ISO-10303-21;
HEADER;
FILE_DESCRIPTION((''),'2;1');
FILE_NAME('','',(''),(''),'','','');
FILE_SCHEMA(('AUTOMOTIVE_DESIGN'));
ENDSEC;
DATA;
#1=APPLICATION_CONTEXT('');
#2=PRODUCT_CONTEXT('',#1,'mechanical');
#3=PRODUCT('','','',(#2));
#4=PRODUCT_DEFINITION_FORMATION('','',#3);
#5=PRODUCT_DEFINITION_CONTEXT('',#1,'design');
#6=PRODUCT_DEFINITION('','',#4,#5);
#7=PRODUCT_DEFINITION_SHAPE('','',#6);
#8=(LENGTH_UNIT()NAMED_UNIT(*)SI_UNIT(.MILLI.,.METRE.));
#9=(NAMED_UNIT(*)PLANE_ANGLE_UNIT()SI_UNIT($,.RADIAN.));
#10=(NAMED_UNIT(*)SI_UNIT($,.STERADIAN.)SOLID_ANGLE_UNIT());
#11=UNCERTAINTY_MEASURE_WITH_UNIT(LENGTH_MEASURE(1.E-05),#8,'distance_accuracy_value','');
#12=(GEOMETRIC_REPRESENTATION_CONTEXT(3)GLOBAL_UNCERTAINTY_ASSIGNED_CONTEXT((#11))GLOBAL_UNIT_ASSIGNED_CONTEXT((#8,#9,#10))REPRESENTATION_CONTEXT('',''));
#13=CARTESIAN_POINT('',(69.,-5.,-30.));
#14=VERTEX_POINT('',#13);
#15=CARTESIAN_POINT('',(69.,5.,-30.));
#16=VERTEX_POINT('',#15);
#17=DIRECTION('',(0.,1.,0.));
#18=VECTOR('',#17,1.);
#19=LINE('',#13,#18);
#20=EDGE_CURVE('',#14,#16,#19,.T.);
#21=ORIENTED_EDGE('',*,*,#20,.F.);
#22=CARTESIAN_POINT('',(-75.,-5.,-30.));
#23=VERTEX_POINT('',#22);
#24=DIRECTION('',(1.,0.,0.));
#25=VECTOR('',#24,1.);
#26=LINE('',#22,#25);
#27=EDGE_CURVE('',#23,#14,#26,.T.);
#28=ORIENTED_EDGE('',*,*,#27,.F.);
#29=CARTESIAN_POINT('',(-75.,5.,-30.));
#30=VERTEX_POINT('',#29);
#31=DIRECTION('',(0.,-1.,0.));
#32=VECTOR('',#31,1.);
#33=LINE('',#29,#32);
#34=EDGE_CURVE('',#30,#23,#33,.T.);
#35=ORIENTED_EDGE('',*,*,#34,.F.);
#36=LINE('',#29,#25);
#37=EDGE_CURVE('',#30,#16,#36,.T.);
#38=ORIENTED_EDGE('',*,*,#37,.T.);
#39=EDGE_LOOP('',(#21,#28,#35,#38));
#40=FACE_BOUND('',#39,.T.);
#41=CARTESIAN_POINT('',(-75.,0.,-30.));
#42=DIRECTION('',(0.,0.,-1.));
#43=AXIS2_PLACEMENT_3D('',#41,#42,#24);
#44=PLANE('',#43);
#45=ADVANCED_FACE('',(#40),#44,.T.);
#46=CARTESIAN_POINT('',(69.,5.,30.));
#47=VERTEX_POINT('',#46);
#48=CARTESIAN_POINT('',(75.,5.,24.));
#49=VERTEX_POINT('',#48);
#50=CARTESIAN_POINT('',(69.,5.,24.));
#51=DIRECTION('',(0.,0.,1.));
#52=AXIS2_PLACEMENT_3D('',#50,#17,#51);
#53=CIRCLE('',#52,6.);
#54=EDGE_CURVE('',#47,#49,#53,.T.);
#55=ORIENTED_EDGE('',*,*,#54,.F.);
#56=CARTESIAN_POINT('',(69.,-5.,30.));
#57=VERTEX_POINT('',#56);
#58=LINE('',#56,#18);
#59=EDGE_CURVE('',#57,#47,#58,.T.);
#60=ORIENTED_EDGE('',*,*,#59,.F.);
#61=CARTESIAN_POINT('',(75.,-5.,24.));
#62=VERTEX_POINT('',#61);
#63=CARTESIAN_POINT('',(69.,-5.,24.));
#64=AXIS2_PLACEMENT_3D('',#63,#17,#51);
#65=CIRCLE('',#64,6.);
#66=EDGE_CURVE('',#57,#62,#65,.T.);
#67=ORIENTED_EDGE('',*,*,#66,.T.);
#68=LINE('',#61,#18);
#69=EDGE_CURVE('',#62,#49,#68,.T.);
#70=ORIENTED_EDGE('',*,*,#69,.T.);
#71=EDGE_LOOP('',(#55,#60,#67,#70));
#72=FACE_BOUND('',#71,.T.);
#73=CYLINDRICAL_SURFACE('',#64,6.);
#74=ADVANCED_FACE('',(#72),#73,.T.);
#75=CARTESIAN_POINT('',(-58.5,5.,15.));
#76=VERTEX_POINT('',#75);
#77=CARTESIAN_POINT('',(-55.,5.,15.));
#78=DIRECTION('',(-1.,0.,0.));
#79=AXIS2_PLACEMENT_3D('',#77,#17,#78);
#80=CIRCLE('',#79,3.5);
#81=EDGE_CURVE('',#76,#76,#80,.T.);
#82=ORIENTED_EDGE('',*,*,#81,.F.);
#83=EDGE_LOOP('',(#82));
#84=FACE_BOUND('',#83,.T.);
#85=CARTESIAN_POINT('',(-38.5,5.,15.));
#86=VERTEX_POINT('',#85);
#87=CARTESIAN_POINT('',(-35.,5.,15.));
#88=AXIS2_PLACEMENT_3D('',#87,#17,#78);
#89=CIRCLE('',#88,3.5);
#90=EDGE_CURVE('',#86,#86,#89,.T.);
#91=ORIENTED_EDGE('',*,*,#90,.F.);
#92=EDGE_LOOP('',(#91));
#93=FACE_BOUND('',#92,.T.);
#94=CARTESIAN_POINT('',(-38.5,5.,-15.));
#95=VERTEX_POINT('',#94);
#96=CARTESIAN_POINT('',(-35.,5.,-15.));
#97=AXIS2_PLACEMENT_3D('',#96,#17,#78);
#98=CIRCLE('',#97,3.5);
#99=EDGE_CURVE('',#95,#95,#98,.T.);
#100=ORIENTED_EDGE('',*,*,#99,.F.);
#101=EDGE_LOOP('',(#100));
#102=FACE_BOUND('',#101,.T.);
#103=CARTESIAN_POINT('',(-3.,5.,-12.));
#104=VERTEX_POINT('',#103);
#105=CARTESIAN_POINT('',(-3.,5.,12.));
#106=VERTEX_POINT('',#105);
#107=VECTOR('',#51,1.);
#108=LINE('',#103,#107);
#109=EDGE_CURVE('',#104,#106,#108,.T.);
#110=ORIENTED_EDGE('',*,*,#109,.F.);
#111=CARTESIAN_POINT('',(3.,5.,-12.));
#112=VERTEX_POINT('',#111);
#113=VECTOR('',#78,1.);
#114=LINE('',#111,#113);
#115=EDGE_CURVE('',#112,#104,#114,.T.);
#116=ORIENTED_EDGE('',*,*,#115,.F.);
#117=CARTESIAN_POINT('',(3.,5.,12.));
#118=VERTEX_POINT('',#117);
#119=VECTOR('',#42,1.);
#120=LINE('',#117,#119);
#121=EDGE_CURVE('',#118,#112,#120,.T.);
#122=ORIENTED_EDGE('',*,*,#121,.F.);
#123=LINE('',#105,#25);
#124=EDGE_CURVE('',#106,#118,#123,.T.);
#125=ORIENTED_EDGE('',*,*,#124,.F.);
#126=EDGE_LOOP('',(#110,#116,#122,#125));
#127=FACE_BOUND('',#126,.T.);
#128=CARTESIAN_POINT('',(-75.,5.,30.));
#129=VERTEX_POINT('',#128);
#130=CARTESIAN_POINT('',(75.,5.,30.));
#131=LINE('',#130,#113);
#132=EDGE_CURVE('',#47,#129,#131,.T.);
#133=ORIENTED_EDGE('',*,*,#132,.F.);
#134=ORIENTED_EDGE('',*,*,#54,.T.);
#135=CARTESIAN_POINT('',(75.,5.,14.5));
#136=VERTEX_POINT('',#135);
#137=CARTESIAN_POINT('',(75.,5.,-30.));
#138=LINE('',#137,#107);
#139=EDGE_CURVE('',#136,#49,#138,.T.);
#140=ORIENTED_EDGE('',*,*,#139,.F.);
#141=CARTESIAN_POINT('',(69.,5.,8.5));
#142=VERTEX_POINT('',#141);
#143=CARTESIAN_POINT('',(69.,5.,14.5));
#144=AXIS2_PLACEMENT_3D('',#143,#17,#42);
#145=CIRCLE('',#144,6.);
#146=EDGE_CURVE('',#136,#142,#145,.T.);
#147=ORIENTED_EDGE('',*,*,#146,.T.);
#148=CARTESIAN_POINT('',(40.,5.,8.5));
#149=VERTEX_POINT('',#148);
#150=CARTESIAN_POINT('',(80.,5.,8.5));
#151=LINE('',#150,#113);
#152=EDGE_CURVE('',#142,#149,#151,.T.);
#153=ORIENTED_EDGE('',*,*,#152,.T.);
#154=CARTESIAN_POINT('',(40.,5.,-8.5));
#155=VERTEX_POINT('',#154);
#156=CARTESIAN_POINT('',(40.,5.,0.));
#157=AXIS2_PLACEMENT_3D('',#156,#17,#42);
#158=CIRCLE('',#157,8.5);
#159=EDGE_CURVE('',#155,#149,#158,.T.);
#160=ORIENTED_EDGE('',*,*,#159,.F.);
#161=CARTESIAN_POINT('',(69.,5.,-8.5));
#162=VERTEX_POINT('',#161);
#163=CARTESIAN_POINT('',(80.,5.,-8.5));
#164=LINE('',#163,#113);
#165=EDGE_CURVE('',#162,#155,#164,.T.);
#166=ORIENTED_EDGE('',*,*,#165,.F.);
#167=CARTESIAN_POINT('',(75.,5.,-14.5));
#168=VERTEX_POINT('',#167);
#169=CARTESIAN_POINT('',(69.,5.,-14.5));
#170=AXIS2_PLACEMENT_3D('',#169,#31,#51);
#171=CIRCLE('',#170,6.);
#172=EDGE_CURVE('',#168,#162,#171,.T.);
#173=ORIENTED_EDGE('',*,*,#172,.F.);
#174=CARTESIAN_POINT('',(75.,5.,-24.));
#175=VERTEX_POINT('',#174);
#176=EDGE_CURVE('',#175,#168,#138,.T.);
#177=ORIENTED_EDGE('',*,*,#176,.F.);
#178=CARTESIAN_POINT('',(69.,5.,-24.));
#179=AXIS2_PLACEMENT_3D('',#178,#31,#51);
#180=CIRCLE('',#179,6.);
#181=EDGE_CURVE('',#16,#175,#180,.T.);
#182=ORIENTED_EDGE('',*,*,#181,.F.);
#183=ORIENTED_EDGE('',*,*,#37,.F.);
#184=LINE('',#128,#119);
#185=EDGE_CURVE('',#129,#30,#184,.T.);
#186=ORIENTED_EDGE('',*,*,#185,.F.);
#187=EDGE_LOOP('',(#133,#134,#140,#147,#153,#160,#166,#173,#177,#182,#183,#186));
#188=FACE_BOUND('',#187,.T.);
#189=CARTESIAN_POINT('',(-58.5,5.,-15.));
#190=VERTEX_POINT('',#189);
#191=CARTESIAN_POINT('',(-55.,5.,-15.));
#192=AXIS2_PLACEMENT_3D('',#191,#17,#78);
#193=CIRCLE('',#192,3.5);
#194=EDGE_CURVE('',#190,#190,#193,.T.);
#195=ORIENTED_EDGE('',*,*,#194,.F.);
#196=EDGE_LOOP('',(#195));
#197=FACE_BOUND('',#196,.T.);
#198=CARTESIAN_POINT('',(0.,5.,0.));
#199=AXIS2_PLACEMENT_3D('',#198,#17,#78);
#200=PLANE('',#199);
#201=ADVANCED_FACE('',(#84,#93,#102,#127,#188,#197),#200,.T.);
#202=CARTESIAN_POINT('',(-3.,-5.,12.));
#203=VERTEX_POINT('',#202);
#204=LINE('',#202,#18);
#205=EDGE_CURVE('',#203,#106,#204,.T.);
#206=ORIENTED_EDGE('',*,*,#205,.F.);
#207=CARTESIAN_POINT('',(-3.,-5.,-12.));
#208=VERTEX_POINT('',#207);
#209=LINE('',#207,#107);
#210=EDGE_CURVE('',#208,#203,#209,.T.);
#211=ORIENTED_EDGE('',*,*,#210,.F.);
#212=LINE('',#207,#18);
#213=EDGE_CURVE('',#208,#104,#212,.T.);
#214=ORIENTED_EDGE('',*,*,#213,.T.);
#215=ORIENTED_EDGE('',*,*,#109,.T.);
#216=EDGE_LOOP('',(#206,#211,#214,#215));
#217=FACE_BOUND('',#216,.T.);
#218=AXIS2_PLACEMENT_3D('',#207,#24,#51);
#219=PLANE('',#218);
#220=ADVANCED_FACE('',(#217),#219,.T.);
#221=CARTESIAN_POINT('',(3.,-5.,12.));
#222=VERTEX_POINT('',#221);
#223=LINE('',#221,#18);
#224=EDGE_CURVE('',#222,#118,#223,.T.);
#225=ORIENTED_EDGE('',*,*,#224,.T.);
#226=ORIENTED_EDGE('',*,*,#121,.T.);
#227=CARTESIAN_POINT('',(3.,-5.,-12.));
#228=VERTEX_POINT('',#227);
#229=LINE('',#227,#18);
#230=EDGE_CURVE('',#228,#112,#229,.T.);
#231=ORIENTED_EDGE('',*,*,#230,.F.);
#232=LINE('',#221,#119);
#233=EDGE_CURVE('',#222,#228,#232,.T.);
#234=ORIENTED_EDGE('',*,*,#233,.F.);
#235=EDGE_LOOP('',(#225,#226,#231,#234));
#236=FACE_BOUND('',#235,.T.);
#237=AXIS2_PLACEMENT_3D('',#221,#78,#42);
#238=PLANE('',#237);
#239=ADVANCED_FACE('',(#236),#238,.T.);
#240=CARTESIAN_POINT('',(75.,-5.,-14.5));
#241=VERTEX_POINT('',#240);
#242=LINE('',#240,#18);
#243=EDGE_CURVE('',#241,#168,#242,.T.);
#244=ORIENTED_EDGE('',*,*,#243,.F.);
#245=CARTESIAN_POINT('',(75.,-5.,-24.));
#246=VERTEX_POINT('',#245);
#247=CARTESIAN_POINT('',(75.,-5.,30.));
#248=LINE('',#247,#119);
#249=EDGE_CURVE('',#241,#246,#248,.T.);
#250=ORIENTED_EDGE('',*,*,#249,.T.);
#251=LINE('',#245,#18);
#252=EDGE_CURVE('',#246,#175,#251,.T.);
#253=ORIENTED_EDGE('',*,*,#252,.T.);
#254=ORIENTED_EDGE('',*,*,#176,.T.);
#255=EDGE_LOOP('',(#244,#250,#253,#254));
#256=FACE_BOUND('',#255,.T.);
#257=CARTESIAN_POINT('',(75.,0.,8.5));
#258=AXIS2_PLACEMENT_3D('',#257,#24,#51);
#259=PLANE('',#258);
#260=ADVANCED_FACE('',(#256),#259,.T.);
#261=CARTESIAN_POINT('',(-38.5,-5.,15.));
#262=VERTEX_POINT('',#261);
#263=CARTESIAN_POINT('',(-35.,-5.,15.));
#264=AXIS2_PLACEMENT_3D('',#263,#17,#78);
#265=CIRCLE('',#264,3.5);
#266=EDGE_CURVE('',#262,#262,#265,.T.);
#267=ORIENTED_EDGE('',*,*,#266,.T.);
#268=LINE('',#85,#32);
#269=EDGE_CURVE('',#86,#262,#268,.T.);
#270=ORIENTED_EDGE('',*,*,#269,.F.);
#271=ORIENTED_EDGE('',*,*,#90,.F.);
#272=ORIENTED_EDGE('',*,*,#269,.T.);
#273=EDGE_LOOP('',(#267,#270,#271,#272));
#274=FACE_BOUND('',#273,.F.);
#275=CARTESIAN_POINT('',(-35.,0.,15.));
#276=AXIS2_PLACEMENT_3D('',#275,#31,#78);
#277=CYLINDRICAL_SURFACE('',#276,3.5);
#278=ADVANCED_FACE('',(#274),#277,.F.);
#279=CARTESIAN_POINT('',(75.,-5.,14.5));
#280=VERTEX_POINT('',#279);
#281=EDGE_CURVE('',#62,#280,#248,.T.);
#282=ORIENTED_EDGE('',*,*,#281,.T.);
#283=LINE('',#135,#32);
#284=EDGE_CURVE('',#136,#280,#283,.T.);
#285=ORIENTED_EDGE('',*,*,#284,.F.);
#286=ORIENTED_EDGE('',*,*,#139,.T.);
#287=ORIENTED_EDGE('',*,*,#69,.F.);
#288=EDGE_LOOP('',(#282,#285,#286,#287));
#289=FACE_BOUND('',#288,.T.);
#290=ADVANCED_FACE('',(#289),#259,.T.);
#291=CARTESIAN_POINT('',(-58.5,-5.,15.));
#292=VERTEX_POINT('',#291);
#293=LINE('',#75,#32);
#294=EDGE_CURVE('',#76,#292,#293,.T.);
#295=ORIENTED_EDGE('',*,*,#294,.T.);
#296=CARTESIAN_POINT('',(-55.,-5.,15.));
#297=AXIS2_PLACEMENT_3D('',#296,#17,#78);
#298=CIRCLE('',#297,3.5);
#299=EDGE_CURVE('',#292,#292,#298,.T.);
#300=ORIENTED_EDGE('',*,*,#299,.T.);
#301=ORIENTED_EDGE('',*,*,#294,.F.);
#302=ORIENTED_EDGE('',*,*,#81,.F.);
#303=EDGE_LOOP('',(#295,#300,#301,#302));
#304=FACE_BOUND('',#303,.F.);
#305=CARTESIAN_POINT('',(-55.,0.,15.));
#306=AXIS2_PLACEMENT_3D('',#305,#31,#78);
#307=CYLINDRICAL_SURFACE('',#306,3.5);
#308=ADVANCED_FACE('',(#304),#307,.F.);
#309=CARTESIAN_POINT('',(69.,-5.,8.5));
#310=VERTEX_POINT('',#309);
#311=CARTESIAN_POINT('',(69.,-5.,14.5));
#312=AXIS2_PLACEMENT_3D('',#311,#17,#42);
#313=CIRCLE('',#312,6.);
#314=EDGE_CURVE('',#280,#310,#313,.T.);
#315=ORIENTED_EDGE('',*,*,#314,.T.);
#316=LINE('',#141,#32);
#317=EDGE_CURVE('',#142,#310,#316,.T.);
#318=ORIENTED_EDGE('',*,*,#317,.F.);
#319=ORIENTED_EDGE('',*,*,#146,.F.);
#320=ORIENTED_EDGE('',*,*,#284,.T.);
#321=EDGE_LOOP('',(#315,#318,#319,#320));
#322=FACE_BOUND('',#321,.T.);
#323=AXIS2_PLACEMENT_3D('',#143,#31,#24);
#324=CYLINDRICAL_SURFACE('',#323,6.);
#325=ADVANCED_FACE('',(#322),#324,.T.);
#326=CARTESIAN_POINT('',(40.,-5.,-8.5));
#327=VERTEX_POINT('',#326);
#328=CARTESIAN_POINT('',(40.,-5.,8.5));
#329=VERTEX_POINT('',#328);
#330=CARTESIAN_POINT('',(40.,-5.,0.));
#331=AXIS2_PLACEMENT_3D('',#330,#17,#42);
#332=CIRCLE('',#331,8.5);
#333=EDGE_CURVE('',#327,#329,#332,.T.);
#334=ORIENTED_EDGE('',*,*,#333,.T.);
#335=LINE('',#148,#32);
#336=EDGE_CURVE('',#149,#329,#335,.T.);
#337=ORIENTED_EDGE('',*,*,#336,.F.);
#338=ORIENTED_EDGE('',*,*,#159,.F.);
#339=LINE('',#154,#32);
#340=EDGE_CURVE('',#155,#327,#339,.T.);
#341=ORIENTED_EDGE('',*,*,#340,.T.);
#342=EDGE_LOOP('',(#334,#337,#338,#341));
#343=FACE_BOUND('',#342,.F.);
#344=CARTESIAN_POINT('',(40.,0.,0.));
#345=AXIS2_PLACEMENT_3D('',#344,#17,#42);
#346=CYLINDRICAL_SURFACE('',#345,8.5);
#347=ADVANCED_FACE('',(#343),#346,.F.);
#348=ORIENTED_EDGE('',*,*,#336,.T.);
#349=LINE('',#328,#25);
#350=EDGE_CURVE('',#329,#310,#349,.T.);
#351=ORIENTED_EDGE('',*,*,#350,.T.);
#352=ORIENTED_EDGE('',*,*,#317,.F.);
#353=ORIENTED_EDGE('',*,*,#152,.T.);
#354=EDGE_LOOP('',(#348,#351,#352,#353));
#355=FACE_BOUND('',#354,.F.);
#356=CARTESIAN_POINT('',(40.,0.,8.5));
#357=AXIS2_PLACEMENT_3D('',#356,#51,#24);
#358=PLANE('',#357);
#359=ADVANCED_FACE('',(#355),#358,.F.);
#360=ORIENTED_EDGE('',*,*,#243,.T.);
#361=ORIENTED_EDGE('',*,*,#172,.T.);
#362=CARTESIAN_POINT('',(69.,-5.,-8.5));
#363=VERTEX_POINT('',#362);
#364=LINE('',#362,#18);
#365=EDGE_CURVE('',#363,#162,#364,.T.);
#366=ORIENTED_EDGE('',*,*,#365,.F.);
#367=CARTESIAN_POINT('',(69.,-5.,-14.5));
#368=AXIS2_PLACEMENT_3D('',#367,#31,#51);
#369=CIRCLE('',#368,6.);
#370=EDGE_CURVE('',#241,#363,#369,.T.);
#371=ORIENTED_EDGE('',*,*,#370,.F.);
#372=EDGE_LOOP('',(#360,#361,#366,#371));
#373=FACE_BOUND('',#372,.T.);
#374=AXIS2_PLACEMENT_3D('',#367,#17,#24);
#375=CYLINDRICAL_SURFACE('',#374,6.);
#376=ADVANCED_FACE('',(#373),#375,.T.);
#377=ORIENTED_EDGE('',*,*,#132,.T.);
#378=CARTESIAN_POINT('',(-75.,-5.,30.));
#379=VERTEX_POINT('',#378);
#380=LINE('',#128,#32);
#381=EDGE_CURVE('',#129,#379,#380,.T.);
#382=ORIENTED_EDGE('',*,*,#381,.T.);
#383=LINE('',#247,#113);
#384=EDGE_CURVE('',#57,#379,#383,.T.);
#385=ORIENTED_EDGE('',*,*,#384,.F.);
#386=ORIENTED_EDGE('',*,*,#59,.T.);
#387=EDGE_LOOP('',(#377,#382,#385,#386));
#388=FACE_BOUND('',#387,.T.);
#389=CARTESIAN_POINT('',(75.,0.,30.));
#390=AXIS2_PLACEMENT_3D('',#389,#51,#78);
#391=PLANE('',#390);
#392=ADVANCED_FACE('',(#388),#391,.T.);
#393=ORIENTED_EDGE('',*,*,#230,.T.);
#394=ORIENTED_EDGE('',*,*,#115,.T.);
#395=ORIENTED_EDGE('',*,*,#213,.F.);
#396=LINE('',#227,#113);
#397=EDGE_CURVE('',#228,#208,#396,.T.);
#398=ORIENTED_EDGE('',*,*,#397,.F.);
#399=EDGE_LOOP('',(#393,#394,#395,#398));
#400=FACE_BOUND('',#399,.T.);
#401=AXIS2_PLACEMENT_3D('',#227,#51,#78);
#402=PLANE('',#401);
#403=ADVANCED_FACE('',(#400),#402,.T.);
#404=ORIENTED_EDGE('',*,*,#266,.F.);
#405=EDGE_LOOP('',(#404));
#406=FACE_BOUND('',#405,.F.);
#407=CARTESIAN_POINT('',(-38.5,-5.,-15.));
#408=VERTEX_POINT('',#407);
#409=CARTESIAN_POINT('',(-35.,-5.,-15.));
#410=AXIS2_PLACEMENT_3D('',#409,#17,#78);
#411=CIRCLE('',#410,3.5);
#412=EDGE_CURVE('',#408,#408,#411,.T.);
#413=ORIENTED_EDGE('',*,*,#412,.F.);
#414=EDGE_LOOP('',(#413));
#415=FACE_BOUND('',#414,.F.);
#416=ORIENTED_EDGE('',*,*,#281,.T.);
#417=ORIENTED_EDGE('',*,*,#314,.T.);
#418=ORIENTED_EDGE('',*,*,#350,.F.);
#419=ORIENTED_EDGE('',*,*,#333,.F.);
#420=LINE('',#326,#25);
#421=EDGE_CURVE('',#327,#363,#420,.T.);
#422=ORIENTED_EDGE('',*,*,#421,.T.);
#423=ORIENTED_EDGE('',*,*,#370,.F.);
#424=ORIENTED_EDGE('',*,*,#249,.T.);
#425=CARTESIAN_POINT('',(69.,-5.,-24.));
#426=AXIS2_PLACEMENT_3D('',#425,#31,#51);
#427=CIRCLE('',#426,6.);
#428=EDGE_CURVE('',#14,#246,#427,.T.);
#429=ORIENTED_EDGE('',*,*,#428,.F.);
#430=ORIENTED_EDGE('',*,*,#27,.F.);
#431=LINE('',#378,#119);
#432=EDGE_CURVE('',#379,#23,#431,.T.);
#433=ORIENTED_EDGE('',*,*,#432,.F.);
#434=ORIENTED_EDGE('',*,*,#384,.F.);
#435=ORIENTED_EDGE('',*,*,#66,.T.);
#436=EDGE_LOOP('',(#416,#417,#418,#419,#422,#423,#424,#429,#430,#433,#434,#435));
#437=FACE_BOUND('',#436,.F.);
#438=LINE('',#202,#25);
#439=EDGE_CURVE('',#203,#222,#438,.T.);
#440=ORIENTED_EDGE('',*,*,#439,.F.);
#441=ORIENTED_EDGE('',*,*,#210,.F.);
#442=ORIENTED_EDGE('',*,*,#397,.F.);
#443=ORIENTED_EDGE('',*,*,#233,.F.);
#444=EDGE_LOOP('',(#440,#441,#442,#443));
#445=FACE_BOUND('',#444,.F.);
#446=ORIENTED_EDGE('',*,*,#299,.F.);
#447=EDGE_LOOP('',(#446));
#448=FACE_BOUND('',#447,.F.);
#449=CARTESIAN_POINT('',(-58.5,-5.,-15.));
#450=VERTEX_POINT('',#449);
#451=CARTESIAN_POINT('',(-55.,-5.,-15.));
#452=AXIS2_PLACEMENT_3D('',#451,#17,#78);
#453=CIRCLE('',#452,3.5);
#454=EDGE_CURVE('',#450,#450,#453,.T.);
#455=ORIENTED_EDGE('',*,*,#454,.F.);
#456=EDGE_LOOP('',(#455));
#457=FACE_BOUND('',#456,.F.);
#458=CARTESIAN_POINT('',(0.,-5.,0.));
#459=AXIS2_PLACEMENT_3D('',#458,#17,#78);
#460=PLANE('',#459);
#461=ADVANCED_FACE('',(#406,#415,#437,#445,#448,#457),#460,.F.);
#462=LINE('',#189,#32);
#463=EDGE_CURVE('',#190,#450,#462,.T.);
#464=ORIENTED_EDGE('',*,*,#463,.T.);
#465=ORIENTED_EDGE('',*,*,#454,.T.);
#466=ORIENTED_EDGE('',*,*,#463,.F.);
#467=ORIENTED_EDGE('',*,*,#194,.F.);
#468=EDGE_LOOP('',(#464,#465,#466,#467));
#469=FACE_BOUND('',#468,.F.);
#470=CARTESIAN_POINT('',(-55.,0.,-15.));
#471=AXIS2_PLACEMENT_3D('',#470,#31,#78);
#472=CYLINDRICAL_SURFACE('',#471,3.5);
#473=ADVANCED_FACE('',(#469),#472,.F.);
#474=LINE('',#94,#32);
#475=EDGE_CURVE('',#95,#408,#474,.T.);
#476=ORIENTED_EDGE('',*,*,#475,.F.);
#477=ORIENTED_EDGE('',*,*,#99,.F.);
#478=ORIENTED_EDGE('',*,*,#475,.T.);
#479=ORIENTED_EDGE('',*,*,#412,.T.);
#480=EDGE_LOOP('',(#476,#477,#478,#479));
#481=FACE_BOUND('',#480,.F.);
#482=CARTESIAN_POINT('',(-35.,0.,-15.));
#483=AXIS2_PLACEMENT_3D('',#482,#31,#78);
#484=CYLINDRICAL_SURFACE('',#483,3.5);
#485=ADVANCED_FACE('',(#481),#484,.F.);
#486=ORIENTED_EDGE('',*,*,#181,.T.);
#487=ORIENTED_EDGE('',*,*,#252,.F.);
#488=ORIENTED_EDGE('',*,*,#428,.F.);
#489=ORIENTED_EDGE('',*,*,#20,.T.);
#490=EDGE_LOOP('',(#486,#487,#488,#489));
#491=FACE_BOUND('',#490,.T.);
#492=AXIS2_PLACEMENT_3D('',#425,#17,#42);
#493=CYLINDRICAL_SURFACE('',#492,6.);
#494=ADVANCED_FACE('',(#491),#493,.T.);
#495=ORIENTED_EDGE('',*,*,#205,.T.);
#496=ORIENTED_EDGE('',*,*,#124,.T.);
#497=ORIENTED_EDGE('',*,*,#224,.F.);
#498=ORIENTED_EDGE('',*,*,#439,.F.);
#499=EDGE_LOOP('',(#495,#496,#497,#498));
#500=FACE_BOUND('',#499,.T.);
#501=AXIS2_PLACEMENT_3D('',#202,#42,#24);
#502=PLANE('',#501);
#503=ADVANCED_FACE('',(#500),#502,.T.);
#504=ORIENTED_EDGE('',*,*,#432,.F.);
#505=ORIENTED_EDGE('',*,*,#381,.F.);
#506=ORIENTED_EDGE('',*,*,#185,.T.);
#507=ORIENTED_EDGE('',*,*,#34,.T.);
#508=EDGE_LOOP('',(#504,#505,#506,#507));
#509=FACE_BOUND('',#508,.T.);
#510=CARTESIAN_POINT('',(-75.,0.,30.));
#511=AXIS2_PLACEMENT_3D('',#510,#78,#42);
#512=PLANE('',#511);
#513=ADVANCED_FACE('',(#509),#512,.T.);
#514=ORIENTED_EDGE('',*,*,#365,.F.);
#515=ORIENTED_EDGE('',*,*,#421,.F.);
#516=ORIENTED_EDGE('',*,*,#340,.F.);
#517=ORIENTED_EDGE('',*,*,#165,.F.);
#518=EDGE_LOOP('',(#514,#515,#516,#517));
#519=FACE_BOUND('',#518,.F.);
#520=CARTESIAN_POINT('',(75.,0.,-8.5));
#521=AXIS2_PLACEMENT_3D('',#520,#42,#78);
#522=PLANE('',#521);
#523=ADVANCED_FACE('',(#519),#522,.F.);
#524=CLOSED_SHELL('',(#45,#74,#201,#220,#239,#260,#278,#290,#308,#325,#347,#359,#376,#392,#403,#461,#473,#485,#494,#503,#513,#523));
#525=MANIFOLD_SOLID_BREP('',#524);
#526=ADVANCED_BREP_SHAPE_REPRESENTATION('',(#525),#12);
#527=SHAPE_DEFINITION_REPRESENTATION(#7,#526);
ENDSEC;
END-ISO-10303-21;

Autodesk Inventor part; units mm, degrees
ref_plane "YZ Plane" through (0, 0, 0) normal (1, 0, 0) x (0, 1, 0)
ref_plane "XZ Plane" through (0, 0, 0) normal (0, 1, 0) x (-1, 0, 0)
ref_plane "XY Plane" through (0, 0, 0) normal (0, 0, 1) x (1, 0, 0)
sketch "Sketch1" plane through (0, 0, 0) normal (0, 1, 0) x (-1, 0, 0)
  line L0 (-75, 30) -> (75, 30)
  line L1 (75, 30) -> (75, -30)
  line L2 (75, -30) -> (-75, -30)
  line L3 (-75, -30) -> (-75, 30)
  line L4 (-75, 30) -> (75, -30) construction
  line L5 (75, 30) -> (-75, -30) construction
  line L6 (-80, 0) -> (-40, 0) construction
  line L7 (-80, -8.5) -> (-40, -8.5)
  line L8 (-40, 8.5) -> (-80, 8.5)
  arc A0 (-80, 8.5) -> (-80, -8.5) centre (-80, 0) ccw
  arc A1 (-40, -8.5) -> (-40, 8.5) centre (-40, 0) ccw
  circle A2 centre (55, 15) radius 3.5
  circle A3 centre (55, -15) radius 3.5
  circle A4 centre (35, 15) radius 3.5
  circle A5 centre (35, -15) radius 3.5
  point P0 (0, 0)
  point P1 (-60, 0)
  dimension "d0" = 60
  dimension "d1" = 150
  dimension "d2" = 60
  dimension "d3" = 40
  dimension "d4" = 17
  dimension "d5" = 7
  dimension "d6" = 15
  dimension "d7" = 30
  dimension "d8" = 20
  dimension "d9" = 20
extrude "Plate1" add sketch "Sketch1" along normal mid plane 10 contours L0 L1 L2 L3 L7 A1 L8 | L8 A1 L7 L3
extrude "Cut1" cut sketch "Sketch1" against normal mid plane 10 contours L8 A1 L7 L3 | L3 L7 A0 L8
sketch "Sketch2" plane through (0, -5, 0) normal (0, -1, 0) x (1, 0, 0)
  line L0 (-3, 12) -> (3, 12)
  line L1 (3, 12) -> (3, -12)
  line L2 (3, -12) -> (-3, -12)
  line L3 (-3, -12) -> (-3, 12)
  line L4 (75, 30) -> (-75, 30) projected
  point P0 (0, 0)
  point P1 (0, 12)
  dimension "d13" = 24
  dimension "d14" = 18
  dimension "d15" = 6
extrude "Cut2" cut sketch "Sketch2" against normal blind 10
fillet "Corner Round1" radius 6 4 edges at (75, 0, 30) (75, 0, 8.5) (75, 0, -8.5) (75, 0, -30)
equation "\"d11\" = Thickness"
equation "\"d16\" = Thickness"
equation "\"d10\" = Thickness"
equation "\"BendReliefDepth\" = 0.5 * Thickness"
equation "\"Thickness\" = 10"
properties part number "HCMUTE-CDT23-BAT_TRUC_CANG_TAI" material "Stainless Steel"
